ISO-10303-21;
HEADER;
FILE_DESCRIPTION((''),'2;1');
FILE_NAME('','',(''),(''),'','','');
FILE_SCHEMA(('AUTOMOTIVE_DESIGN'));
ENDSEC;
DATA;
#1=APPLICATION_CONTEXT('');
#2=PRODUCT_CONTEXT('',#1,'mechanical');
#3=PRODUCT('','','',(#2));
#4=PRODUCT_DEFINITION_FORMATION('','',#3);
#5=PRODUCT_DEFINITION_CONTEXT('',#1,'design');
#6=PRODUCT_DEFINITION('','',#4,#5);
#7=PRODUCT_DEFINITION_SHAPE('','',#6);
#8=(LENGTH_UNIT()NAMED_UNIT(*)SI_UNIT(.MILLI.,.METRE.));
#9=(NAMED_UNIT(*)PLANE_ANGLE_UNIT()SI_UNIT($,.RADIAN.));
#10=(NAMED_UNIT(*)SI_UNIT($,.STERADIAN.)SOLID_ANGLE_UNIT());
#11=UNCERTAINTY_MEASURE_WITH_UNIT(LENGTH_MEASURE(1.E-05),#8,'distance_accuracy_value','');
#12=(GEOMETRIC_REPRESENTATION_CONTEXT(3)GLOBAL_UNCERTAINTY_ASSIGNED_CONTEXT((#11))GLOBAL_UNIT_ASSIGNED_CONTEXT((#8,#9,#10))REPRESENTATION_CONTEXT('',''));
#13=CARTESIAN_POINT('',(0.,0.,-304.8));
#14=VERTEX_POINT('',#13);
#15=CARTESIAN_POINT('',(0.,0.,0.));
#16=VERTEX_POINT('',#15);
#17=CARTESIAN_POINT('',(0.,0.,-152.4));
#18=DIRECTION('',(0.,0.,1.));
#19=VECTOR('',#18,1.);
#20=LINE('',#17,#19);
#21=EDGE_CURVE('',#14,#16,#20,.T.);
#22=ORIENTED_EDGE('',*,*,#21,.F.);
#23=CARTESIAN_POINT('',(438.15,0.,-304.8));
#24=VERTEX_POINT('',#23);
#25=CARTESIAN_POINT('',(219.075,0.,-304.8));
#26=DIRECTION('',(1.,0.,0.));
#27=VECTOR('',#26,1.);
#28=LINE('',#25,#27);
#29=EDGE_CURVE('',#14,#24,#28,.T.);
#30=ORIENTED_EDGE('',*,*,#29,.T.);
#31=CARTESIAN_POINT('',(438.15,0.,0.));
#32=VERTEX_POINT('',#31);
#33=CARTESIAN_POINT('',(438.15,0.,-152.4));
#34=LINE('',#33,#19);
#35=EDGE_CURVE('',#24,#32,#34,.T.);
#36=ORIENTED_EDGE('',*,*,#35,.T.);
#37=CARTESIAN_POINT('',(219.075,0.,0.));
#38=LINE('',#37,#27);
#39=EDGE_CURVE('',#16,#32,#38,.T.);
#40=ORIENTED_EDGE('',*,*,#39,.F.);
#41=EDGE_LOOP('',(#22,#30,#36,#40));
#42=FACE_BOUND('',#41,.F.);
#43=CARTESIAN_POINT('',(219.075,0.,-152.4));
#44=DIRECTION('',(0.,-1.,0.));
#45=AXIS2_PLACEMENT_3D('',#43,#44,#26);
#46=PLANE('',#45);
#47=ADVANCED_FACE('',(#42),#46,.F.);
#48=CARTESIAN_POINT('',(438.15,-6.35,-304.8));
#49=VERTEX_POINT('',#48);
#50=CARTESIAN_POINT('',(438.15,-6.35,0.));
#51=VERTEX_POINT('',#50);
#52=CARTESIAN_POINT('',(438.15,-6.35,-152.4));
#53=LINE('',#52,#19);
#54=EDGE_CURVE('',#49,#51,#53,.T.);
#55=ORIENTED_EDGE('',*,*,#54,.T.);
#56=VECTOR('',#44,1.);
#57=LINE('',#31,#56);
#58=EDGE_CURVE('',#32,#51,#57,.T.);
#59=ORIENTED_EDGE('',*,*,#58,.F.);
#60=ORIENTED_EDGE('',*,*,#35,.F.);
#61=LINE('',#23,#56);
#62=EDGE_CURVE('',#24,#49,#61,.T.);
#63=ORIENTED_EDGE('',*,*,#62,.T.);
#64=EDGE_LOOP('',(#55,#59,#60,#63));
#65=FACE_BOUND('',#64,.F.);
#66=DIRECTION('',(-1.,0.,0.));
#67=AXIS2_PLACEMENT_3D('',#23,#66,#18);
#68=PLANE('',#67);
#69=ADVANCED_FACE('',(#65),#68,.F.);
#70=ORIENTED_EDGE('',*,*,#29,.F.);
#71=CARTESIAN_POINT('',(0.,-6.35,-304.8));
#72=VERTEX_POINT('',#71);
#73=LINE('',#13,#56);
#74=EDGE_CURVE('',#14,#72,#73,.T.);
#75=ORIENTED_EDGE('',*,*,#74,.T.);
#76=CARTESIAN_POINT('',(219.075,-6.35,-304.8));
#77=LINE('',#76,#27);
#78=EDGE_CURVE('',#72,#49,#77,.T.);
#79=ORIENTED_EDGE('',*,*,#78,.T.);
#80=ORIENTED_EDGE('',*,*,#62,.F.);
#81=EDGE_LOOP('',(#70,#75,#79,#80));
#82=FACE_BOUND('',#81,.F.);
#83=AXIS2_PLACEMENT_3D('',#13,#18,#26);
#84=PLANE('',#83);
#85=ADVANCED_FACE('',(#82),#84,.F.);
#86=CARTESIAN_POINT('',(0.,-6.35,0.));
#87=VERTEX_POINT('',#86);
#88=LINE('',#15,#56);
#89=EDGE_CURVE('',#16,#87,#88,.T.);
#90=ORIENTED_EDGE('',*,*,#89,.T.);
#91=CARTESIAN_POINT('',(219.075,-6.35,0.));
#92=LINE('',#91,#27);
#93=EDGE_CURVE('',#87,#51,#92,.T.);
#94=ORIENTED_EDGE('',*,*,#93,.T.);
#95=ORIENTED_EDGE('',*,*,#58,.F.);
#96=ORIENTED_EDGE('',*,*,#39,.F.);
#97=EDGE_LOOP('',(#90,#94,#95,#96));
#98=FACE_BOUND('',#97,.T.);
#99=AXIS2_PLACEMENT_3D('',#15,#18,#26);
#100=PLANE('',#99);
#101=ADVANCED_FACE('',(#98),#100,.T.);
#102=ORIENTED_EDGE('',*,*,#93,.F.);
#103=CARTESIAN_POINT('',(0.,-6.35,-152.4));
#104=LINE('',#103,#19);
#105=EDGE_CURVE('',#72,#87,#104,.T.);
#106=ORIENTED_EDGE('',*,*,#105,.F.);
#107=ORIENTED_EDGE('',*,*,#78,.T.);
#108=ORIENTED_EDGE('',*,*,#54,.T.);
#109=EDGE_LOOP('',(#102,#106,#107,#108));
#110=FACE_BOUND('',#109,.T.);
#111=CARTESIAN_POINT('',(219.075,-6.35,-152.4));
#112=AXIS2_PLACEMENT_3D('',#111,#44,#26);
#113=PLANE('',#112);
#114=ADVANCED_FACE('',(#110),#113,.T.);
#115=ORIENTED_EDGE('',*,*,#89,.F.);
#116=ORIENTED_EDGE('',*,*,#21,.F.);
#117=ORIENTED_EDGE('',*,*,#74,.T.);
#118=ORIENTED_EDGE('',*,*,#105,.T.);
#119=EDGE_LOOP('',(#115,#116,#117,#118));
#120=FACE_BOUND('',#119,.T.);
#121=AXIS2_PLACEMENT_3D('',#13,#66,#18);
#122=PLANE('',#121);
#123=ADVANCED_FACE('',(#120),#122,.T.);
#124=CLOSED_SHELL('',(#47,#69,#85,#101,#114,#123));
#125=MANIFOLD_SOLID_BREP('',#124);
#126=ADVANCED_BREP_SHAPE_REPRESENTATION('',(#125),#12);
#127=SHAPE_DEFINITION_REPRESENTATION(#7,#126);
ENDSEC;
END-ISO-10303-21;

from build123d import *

# Parameters (mm, degrees)
F1_W     = 438.15
F1_H     = 304.8
F2_DEPTH = 6.35


# Not quite as in the source:
# - a variable given as a bare number and used for a length is read in inches; the dataset says mm whatever the document's units were


with BuildPart() as f2:
    # F1 (on Front) → F2 (new body)
    with BuildSketch(Plane.XZ):
        with Locations((219.075, -152.4)):
            Rectangle(F1_W, F1_H)
    extrude(amount=F2_DEPTH)


solid = f2.part
